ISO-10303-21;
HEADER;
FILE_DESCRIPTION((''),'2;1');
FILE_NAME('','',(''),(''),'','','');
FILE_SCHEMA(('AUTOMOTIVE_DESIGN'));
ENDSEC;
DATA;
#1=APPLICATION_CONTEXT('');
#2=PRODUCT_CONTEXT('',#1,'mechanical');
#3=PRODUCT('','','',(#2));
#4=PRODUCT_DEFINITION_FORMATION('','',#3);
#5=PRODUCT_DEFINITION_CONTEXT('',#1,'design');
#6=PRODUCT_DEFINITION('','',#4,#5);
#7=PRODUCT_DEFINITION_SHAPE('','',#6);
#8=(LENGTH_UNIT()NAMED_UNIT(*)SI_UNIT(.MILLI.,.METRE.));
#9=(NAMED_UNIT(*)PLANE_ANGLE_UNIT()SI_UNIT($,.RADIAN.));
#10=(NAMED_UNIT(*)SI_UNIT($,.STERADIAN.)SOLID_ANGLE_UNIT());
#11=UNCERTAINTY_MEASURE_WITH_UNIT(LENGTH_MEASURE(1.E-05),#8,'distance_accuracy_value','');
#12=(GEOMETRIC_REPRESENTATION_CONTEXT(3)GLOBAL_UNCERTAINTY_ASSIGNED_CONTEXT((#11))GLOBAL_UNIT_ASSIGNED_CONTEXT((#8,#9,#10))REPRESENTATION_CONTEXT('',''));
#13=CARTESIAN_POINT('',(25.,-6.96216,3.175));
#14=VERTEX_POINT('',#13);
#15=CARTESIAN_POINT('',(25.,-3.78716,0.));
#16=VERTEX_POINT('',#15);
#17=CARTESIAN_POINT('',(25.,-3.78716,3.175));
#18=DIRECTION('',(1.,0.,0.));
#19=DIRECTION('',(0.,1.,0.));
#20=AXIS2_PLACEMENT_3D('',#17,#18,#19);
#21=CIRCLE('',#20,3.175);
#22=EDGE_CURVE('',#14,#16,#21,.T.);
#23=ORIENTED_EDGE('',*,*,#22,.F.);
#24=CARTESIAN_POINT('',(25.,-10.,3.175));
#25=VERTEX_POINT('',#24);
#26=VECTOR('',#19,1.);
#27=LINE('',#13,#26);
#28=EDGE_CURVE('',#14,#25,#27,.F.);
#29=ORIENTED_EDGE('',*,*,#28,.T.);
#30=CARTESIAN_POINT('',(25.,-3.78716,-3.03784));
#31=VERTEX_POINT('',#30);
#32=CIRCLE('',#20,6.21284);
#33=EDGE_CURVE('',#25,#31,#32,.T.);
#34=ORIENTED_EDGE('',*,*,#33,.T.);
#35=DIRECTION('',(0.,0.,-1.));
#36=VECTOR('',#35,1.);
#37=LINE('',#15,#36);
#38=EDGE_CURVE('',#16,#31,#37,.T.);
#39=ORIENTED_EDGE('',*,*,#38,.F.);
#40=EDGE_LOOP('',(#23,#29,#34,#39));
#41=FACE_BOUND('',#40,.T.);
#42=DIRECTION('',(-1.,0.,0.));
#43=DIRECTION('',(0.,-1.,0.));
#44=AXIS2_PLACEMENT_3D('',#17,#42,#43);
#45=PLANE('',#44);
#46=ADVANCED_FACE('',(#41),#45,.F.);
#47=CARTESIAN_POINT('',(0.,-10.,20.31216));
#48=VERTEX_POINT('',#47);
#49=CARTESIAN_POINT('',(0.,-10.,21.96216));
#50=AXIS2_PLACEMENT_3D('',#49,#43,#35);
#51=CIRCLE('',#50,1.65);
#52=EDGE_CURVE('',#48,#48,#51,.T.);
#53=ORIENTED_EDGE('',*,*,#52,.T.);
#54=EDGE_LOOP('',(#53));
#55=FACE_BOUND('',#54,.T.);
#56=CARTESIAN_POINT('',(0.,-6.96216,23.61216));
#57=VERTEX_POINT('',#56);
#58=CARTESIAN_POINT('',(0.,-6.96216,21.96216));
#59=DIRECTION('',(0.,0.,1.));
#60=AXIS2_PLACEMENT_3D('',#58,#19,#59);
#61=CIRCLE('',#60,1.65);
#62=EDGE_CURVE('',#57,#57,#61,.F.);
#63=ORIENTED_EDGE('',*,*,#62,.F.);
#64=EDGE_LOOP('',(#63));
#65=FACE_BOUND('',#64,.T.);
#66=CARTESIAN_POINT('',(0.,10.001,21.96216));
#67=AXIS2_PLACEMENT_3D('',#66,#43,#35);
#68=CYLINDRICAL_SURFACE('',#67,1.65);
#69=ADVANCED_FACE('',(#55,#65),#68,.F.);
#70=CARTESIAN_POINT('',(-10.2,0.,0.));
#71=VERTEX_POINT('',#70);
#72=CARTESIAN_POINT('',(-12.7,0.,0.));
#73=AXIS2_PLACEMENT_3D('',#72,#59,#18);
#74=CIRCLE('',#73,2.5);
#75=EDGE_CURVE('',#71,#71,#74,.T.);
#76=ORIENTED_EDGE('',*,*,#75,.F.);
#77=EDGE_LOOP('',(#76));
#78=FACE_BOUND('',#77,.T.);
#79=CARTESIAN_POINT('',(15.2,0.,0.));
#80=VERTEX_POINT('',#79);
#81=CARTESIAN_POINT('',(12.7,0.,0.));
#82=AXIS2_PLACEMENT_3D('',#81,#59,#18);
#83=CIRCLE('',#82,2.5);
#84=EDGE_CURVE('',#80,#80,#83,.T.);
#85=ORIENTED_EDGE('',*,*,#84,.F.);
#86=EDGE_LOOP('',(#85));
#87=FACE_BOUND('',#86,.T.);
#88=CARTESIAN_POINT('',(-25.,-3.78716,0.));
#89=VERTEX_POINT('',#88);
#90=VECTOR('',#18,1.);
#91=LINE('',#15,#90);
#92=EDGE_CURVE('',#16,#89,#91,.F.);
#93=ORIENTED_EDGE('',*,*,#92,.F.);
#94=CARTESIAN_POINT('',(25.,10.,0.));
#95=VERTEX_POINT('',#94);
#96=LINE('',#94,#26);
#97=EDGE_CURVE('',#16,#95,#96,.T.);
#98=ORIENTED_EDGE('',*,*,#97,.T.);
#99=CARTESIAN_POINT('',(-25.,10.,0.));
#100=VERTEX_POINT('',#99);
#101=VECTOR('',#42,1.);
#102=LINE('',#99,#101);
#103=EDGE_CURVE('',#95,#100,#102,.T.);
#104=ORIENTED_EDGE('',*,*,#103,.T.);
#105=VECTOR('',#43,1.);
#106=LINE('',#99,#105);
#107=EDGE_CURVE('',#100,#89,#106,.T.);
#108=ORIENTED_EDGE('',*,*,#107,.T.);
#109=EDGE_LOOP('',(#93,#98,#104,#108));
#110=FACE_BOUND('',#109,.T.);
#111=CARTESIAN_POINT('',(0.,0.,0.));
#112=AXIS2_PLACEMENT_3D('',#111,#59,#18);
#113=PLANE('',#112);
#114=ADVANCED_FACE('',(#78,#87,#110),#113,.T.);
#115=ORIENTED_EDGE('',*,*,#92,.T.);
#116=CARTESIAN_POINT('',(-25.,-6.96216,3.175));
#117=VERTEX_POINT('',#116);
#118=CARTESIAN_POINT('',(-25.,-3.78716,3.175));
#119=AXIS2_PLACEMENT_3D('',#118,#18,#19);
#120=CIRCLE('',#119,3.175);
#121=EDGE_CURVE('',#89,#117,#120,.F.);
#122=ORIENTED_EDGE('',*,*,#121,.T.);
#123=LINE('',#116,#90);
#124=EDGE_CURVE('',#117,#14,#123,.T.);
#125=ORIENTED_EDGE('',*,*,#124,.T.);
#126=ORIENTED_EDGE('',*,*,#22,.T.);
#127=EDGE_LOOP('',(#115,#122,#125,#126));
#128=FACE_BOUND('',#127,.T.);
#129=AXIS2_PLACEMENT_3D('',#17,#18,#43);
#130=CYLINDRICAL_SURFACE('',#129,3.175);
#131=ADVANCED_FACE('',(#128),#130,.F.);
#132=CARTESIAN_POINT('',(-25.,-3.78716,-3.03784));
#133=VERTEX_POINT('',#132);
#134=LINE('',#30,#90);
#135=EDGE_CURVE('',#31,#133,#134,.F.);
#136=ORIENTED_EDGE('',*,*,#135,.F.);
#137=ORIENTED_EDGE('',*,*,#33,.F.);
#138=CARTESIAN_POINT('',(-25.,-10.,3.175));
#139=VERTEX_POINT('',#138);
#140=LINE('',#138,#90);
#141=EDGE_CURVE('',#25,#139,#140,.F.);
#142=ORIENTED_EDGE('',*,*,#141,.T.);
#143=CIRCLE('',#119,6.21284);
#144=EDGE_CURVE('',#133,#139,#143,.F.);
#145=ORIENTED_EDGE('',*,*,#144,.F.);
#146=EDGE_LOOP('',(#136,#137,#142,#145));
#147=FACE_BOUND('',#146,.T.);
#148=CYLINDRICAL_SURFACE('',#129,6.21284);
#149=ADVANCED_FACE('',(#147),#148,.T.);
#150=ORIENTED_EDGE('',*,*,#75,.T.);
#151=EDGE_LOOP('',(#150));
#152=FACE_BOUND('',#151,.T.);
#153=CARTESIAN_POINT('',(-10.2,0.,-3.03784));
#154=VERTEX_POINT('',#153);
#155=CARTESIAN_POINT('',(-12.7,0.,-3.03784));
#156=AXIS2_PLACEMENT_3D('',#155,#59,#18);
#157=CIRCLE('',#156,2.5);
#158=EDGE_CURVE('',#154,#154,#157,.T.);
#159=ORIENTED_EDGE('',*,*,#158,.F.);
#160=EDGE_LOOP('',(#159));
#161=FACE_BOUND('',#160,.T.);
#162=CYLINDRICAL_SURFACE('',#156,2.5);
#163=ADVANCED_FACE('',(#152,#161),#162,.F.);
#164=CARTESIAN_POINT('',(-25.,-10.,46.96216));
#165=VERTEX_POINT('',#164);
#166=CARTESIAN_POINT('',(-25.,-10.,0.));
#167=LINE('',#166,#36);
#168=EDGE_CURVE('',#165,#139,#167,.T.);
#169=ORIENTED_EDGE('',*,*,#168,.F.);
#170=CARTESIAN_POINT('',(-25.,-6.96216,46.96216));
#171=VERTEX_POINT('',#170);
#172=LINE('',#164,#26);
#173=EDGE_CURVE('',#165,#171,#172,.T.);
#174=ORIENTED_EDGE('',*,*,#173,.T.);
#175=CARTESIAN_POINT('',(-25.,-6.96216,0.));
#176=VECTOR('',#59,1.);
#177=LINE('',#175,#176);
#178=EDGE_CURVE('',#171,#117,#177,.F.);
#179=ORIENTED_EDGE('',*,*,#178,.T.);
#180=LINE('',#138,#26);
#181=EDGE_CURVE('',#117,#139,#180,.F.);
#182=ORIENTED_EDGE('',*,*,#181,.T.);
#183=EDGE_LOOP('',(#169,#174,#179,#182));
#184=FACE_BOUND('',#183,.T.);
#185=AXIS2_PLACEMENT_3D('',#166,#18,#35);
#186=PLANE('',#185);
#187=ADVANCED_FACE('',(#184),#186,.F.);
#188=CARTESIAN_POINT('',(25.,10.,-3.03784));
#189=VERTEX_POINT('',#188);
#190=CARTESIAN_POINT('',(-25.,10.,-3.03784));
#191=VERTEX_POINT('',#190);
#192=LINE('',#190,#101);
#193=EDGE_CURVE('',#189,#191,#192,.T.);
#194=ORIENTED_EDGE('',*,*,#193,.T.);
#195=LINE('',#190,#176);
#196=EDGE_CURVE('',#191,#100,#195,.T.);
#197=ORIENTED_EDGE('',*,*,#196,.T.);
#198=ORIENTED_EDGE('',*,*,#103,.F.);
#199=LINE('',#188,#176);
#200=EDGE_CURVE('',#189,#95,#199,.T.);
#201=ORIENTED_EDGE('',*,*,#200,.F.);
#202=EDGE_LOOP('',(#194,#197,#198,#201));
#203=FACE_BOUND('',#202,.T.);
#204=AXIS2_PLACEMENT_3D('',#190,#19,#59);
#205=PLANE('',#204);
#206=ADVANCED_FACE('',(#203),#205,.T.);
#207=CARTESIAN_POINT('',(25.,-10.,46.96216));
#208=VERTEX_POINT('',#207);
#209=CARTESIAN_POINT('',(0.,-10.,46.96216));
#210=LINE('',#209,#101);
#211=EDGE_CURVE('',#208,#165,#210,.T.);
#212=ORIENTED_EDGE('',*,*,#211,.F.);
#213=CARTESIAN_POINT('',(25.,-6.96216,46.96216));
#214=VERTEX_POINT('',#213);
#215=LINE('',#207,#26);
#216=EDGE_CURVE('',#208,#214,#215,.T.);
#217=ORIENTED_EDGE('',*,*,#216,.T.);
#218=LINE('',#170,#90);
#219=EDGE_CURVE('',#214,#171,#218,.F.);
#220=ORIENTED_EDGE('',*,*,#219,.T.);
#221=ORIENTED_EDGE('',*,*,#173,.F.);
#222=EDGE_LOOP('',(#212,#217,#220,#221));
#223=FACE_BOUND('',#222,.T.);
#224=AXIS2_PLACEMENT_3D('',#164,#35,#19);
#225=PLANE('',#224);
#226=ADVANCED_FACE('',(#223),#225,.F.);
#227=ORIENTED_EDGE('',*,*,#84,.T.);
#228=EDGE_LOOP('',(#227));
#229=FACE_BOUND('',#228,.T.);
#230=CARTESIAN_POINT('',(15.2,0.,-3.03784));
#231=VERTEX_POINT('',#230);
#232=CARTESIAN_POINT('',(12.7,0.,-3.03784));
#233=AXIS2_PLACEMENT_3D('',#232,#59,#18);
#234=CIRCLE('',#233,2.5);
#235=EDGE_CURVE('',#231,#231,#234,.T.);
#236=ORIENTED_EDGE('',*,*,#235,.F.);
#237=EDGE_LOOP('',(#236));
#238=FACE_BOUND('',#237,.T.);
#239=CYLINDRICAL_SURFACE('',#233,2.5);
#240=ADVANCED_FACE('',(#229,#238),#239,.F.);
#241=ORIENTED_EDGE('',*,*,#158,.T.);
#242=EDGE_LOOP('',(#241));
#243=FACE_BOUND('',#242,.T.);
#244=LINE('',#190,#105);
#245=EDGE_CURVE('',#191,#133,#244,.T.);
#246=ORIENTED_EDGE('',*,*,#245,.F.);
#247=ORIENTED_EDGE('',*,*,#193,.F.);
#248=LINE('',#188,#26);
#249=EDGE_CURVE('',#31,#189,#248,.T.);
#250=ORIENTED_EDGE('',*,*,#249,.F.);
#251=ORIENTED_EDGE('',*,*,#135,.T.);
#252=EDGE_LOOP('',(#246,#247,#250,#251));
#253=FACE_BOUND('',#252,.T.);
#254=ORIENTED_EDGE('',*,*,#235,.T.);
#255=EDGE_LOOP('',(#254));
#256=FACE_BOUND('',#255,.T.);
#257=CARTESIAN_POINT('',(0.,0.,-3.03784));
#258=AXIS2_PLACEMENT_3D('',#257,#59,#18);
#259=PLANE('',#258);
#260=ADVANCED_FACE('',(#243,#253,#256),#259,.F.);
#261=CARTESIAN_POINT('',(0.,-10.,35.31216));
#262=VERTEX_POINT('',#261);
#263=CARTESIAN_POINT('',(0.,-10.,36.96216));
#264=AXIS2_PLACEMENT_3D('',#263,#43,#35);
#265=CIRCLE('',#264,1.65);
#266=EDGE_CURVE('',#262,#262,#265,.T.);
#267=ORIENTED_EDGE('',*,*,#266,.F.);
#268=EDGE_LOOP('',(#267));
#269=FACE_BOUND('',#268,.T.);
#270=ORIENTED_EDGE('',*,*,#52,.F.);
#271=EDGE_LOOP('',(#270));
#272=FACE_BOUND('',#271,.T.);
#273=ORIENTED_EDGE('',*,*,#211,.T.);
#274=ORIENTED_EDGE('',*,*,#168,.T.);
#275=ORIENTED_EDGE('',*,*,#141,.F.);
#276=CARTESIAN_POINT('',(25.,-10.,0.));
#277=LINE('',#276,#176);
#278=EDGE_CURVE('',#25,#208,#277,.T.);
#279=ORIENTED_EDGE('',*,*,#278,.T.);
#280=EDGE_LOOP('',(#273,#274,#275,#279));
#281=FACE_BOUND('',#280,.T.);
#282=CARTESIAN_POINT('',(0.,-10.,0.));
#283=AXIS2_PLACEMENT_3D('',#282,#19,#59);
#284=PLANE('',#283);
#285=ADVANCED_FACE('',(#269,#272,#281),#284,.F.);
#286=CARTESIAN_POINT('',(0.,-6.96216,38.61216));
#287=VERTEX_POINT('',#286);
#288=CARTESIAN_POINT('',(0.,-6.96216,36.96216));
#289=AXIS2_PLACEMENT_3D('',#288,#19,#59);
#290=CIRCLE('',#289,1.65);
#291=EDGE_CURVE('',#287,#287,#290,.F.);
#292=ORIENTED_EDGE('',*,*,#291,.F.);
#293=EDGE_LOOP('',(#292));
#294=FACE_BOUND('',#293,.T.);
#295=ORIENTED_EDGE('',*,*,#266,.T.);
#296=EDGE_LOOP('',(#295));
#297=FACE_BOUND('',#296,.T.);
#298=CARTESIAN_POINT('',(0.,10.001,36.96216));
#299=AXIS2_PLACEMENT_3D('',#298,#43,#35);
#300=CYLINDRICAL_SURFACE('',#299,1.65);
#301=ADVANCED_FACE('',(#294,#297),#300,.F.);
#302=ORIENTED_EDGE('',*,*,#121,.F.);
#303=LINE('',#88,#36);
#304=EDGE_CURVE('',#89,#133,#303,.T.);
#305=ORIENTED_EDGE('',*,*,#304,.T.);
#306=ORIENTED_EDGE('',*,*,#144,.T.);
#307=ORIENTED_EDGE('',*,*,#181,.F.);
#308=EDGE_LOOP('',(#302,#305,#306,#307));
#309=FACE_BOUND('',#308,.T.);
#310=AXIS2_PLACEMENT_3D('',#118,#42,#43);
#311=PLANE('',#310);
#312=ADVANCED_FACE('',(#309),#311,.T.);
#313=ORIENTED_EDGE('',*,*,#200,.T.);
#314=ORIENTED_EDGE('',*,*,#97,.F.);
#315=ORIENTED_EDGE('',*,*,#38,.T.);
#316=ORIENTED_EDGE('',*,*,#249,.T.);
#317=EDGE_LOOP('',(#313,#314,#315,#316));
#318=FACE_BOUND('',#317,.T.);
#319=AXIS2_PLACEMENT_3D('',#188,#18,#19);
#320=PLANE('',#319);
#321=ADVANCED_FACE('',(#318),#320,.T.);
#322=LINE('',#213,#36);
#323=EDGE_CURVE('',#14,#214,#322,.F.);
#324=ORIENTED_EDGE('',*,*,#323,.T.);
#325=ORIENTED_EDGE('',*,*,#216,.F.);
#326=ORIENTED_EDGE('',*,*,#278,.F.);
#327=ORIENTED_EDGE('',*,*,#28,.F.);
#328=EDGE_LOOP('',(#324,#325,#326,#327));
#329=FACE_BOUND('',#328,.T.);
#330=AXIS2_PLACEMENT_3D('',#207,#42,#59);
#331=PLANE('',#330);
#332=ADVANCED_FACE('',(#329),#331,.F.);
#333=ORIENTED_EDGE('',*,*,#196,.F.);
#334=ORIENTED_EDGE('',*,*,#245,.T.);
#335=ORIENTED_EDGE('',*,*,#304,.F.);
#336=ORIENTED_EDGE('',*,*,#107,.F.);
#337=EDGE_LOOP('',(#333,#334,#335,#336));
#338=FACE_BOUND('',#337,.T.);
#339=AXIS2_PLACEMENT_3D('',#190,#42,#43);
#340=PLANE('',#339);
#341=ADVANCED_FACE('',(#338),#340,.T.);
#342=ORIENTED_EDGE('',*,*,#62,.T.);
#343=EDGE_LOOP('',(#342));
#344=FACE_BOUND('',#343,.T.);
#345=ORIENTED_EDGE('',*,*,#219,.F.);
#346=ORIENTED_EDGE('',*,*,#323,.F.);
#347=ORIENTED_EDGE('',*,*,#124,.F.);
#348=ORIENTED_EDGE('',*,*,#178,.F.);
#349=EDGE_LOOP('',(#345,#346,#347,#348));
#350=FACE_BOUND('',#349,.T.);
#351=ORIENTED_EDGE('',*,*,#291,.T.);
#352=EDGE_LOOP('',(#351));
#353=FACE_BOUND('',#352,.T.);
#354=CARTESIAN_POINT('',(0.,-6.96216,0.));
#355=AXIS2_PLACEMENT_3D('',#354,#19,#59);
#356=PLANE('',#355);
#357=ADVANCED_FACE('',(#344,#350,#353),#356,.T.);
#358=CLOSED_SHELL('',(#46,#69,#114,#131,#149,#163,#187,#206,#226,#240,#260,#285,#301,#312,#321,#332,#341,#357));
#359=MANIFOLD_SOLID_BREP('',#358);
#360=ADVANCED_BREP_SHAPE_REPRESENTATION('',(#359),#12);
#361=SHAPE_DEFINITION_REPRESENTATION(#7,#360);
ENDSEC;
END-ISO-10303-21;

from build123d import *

# Parameters (mm, degrees)
CROQUIS1_W                       = 50
CROQUIS1_H                       = 20
CROQUIS1_R                       = 2.5
BRIDA_BASE1_DEPTH                = 3.03784
BRIDA_DE_ARISTA1_STRIP_W         = 18.50136
BRIDA_DE_ARISTA1_STRIP_H         = 3.03784
BRIDA_DE_ARISTA1_STRIP_CUT_DEPTH = 50
BRIDA_DE_ARISTA1_DEPTH           = 50
CORTAR_EXTRUIR1_REACH            = 58.837
CROQUIS9_R                       = 1.65


# Sheet-metal steps are written as plain solids
with BuildPart() as part:
    # Croquis1 → Brida base1 (new body)
    with BuildSketch(Plane.XY):
        Rectangle(CROQUIS1_W, CROQUIS1_H)
        with Locations((-12.7, 0)):
            Circle(CROQUIS1_R, mode=Mode.SUBTRACT)
        with Locations((12.7, 0)):
            Circle(CROQUIS1_R, mode=Mode.SUBTRACT)
    extrude(amount=-BRIDA_BASE1_DEPTH)

    # Brida de arista1 strip (across the edge) → Brida de arista1 strip cut (cut)
    with BuildSketch(Plane(origin=(-25, -10, 0), x_dir=(0, 1, 0), z_dir=(1, 0, 0))):
        with Locations((-3.03784, -1.51892)):
            Rectangle(BRIDA_DE_ARISTA1_STRIP_W, BRIDA_DE_ARISTA1_STRIP_H)
    extrude(amount=BRIDA_DE_ARISTA1_STRIP_CUT_DEPTH, mode=Mode.SUBTRACT)

    # Brida de arista1 section (across the edge) → Brida de arista1 (add)
    with BuildSketch(Plane(origin=(-25, -10, 0), x_dir=(0, 1, 0), z_dir=(1, 0, 0))):
        with BuildLine():
            Line((0, 3.175), (0, 46.96216))
            Line((0, 46.96216), (3.03784, 46.96216))
            Line((3.03784, 46.96216), (3.03784, 3.175))
            ThreePointArc((3.03784, 3.175), (3.96777597, 0.92993597), (6.21284, 0))
            Line((6.21284, 0), (6.21284, -3.03784))
            ThreePointArc((6.21284, -3.03784), (1.819698706, -1.218141294), (0, 3.175))
        make_face()
    extrude(amount=BRIDA_DE_ARISTA1_DEPTH)

    # Croquis9 → Cortar-Extruir1 (cut, up to next)
    with BuildSketch(Plane(origin=(0, -10, 0), x_dir=(-1, 0, 0), z_dir=(0, -1, 0)), mode=Mode.PRIVATE) as cortar_extruir1_sk1:
        with Locations(Location((0, -36.96216, 0), (0, 0, 90))):
            Circle(CROQUIS9_R)
    cortar_extruir1_tool1 = extrude(cortar_extruir1_sk1.sketch, amount=-CORTAR_EXTRUIR1_REACH, mode=Mode.PRIVATE) & part.part
    # Croquis9 → Cortar-Extruir1 (cut, up to next)
    with BuildSketch(Plane(origin=(0, -10, 0), x_dir=(-1, 0, 0), z_dir=(0, -1, 0)), mode=Mode.PRIVATE) as cortar_extruir1_sk2:
        with Locations(Location((0, -21.96216, 0), (0, 0, 90))):
            Circle(CROQUIS9_R)
    cortar_extruir1_tool2 = extrude(cortar_extruir1_sk2.sketch, amount=-CORTAR_EXTRUIR1_REACH, mode=Mode.PRIVATE) & part.part
    add(cortar_extruir1_tool1.solids().sort_by_distance((0, -10, 36.96216))[0], mode=Mode.SUBTRACT)
    add(cortar_extruir1_tool2.solids().sort_by_distance((0, -10, 21.96216))[0], mode=Mode.SUBTRACT)


solid = part.part
